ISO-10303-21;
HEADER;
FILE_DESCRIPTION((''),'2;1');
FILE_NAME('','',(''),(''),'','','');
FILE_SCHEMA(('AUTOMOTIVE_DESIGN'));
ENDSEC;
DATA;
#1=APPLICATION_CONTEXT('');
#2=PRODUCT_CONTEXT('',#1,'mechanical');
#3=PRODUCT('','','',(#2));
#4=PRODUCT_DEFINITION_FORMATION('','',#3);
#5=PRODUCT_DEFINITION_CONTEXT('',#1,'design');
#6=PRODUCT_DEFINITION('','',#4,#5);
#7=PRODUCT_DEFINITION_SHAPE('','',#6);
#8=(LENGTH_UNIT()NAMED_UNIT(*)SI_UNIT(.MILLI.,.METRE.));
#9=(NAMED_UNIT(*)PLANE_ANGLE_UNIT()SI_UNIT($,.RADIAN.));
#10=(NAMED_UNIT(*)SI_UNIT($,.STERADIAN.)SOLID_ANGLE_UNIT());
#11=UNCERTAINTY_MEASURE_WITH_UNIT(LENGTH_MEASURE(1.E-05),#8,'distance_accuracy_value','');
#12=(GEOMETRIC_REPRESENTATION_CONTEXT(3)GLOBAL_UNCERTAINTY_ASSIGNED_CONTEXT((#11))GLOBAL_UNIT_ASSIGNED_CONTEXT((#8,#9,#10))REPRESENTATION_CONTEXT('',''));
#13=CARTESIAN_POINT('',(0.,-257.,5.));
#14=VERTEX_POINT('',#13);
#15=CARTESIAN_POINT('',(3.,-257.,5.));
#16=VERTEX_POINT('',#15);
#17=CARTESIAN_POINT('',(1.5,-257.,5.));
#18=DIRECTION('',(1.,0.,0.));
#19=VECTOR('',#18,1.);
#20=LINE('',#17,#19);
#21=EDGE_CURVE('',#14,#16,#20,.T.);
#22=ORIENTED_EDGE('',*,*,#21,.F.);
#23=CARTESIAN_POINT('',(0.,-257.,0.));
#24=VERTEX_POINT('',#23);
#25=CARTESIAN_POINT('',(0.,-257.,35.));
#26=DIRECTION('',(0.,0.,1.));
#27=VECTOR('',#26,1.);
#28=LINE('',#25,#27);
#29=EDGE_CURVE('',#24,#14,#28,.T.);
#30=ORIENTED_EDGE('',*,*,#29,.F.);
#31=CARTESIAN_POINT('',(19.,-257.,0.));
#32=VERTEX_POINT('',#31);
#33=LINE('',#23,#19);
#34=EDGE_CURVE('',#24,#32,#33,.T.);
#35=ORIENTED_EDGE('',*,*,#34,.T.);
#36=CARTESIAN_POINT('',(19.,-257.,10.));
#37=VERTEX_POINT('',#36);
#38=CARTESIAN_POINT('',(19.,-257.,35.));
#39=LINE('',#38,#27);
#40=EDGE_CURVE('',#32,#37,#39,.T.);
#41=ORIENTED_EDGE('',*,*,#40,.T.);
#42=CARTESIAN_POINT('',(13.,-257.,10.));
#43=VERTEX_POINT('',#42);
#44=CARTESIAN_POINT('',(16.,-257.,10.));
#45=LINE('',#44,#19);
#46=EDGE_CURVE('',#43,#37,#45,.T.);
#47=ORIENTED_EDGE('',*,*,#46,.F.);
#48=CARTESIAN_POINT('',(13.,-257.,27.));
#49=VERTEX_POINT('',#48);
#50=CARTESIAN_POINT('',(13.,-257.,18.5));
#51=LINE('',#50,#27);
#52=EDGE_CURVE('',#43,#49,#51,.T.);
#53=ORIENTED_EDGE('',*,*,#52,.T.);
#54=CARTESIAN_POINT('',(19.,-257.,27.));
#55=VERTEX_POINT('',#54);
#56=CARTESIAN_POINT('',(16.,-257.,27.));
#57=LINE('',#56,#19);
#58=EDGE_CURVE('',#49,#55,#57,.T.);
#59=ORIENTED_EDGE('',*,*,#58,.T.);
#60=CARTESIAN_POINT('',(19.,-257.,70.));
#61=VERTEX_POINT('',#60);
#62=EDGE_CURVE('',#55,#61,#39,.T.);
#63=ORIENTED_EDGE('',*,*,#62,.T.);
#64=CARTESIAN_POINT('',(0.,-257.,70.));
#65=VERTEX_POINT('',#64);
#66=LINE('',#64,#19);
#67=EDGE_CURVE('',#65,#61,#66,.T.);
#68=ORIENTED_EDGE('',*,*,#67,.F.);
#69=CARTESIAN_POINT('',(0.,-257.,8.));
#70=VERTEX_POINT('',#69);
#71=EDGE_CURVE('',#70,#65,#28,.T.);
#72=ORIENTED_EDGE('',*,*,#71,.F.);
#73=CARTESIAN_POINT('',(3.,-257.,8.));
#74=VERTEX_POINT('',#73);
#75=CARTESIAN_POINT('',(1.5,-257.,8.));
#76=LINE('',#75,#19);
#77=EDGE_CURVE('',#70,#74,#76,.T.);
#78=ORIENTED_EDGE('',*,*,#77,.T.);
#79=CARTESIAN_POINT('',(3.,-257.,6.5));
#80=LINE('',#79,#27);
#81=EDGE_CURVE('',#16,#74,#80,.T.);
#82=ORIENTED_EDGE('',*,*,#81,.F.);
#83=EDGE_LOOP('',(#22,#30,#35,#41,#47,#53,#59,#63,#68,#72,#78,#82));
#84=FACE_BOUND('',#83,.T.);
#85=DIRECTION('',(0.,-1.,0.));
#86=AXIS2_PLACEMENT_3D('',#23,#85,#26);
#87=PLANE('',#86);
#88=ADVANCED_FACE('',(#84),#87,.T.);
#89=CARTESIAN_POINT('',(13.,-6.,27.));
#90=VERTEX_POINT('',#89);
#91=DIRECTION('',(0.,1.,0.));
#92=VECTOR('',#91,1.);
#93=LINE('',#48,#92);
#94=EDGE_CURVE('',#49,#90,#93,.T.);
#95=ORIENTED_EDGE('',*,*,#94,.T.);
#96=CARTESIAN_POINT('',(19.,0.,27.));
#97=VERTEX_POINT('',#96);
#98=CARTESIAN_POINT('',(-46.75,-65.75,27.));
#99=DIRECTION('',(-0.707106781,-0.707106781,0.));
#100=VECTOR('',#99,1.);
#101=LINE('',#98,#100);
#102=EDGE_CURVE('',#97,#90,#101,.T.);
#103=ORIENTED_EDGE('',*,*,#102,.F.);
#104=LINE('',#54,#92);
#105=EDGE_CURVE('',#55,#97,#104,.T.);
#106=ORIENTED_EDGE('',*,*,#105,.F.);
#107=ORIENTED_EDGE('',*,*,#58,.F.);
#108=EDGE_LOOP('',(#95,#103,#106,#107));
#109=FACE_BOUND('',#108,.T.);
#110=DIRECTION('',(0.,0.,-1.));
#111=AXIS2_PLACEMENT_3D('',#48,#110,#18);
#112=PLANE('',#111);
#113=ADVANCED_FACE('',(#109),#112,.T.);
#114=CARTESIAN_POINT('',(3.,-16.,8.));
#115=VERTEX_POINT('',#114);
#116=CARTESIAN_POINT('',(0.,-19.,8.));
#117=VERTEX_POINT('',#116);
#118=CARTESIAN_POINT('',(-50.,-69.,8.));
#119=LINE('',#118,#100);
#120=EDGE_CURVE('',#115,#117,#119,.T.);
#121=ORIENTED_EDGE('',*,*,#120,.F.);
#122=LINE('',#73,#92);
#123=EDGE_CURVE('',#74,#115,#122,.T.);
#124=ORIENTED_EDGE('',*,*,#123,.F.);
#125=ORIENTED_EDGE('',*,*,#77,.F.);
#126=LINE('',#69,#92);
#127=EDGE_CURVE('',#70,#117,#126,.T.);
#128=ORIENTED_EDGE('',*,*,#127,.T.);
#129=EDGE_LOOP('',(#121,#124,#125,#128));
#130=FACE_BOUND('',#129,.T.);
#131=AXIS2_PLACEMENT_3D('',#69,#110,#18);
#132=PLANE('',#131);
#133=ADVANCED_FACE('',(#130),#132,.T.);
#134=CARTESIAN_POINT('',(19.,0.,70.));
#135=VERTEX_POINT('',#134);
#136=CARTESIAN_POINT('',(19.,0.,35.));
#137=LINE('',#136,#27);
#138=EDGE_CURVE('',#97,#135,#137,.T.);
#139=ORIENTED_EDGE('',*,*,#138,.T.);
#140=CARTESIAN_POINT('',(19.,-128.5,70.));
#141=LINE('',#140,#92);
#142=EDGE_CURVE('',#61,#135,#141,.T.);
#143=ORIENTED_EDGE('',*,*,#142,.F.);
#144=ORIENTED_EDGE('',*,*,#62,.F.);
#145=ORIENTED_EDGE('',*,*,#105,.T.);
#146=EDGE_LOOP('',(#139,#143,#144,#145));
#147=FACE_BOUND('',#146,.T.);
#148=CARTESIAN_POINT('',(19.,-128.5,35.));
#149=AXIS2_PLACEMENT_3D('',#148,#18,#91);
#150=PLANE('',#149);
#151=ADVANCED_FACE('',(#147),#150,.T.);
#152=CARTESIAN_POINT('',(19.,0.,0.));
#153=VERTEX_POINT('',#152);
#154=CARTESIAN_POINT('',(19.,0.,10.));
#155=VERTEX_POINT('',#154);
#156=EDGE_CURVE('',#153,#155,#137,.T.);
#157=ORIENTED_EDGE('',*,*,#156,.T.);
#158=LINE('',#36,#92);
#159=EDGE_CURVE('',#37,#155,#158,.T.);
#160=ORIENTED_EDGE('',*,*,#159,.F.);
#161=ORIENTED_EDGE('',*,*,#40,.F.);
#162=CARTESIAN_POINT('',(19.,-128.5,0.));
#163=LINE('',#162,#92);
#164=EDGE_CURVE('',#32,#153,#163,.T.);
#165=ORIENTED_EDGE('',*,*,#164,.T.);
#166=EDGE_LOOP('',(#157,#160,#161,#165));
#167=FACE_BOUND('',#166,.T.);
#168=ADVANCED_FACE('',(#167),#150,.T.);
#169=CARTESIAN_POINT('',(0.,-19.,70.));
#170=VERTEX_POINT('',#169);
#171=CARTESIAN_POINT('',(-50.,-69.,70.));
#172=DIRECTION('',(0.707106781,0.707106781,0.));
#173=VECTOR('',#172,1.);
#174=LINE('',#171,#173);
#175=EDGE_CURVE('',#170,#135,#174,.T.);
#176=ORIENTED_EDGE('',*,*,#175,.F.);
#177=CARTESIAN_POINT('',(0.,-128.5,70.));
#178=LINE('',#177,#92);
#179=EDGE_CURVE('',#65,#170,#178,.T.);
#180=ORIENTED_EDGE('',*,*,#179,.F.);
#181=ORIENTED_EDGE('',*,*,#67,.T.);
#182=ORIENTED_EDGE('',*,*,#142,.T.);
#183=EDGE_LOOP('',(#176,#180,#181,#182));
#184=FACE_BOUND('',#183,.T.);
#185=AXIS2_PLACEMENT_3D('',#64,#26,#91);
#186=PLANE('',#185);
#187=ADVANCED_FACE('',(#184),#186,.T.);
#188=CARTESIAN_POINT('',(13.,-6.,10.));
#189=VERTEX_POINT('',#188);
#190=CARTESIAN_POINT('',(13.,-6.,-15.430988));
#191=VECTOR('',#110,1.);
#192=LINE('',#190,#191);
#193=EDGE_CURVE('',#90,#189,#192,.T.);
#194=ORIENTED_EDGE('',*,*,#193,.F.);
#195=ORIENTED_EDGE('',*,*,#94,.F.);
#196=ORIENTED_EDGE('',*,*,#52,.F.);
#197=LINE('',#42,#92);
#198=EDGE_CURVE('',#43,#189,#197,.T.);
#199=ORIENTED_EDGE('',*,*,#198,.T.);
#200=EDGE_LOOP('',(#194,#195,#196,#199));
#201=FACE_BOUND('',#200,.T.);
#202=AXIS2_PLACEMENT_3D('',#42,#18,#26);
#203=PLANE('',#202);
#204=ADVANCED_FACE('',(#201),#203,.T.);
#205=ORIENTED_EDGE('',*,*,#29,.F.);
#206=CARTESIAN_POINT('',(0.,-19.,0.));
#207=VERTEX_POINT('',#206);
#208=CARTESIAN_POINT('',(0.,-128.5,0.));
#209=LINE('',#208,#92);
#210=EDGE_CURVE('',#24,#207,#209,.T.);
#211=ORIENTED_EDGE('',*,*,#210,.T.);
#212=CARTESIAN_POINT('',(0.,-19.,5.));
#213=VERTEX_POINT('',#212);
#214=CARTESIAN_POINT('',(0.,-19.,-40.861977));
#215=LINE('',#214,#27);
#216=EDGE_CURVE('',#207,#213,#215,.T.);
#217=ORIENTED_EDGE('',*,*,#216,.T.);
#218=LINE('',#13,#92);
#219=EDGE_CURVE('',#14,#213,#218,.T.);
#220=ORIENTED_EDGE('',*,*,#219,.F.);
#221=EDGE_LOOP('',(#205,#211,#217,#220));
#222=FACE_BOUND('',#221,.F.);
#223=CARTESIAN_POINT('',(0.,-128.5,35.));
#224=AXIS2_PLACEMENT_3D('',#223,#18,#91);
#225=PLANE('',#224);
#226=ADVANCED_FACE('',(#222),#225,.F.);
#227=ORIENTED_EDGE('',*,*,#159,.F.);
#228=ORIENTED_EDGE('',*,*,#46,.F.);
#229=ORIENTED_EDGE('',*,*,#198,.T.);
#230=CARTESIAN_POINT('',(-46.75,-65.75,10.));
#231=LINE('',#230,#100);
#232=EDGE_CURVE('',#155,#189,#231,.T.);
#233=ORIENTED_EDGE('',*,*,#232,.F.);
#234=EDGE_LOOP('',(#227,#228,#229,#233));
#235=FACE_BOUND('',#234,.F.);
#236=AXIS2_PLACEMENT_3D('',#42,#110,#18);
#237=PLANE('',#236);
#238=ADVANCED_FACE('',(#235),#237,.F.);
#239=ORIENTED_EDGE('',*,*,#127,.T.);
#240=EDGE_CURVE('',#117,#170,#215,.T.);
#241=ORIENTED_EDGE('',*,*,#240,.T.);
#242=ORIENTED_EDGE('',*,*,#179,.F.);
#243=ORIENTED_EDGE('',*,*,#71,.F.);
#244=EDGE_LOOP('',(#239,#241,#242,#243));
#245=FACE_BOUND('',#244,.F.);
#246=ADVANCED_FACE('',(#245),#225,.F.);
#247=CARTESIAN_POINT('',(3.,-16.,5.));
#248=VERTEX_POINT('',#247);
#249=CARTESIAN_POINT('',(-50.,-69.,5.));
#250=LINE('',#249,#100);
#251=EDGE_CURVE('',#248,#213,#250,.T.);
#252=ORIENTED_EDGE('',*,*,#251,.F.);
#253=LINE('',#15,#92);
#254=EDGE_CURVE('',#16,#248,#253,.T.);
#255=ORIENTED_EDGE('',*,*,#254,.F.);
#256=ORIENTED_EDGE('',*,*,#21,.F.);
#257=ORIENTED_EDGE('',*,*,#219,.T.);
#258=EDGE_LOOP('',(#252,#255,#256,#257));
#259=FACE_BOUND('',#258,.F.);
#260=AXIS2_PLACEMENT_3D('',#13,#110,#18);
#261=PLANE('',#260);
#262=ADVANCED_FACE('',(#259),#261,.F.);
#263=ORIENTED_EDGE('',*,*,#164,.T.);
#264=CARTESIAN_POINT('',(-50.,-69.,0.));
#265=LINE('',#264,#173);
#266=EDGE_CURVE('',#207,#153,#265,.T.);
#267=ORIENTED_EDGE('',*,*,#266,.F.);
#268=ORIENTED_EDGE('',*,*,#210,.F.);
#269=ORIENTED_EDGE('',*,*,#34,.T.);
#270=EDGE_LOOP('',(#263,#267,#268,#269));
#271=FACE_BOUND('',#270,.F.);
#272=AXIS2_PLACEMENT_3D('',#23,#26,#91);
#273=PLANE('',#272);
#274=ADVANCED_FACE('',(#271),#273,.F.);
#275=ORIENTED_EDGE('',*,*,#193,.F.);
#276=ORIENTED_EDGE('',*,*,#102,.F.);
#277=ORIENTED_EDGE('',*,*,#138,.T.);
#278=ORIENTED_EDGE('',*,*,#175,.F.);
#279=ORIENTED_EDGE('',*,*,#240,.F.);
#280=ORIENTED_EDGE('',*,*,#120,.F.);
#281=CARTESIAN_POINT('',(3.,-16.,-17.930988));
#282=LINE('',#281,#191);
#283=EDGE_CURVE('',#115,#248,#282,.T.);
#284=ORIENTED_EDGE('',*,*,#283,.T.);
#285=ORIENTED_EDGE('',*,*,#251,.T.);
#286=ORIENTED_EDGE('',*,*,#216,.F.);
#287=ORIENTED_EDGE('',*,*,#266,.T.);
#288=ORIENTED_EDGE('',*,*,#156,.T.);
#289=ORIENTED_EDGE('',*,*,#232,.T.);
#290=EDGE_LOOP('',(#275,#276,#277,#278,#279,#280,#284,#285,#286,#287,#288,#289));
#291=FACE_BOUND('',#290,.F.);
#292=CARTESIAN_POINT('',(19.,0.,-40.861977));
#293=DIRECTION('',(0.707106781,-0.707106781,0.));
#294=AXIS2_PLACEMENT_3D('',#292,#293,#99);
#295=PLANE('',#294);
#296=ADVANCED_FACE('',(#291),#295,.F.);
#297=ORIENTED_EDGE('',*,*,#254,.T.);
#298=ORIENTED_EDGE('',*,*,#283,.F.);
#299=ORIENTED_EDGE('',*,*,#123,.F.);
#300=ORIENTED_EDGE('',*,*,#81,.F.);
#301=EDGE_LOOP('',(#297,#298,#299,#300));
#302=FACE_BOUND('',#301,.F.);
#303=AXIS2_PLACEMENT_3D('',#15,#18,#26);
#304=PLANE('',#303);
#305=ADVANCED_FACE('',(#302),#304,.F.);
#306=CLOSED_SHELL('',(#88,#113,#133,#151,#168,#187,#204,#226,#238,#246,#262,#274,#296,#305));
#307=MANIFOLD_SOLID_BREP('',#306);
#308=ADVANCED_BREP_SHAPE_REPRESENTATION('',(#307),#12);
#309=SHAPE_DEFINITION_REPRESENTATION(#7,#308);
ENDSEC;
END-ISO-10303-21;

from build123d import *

# Parameters (mm, degrees)
F0_W        = 257
F0_H        = 70
F1_DEPTH    = 19
F2_W        = 3
F2_H        = 3
F3_DEPTH    = 257.001
F4_W        = 6
F4_H        = 17
F5_DEPTH    = 257.001
F6_T1_DEPTH = 159.7239535427


# Not quite as in the source:
# - a fillet or chamfer that OpenCascade refuses, or shapes differently, is made with other operations: its cross-section is extruded or revolved along the edge and cut away or added


with BuildPart() as f1:
    # F0 (on Right) → F1 (new body)
    with BuildSketch(Plane.YZ):
        with Locations((-128.5, 35)):
            Rectangle(F0_W, F0_H)
    extrude(amount=F1_DEPTH)

    # F2 (on face) → F3 (cut, through all)
    with BuildSketch(Plane.XZ.offset(257)):
        with Locations((1.5, 6.5)):
            Rectangle(F2_W, F2_H)
    extrude(amount=-F3_DEPTH, mode=Mode.SUBTRACT)

    # F4 (on face) → F5 (cut, through all)
    with BuildSketch(Plane.XZ.offset(257)):
        with Locations((16, 18.5)):
            Rectangle(F4_W, F4_H)
    extrude(amount=-F5_DEPTH, mode=Mode.SUBTRACT)

    # F6: chamfer of 19 on 1 edges, made by hand

    # F6_s2 → F6_t1 (cut)
    with BuildSketch(Plane.XY.offset(-40.8619767714)):
        Polygon((19, 0), (0, -19), (0, 0), align=None)
    extrude(amount=F6_T1_DEPTH, mode=Mode.SUBTRACT)


solid = f1.part
